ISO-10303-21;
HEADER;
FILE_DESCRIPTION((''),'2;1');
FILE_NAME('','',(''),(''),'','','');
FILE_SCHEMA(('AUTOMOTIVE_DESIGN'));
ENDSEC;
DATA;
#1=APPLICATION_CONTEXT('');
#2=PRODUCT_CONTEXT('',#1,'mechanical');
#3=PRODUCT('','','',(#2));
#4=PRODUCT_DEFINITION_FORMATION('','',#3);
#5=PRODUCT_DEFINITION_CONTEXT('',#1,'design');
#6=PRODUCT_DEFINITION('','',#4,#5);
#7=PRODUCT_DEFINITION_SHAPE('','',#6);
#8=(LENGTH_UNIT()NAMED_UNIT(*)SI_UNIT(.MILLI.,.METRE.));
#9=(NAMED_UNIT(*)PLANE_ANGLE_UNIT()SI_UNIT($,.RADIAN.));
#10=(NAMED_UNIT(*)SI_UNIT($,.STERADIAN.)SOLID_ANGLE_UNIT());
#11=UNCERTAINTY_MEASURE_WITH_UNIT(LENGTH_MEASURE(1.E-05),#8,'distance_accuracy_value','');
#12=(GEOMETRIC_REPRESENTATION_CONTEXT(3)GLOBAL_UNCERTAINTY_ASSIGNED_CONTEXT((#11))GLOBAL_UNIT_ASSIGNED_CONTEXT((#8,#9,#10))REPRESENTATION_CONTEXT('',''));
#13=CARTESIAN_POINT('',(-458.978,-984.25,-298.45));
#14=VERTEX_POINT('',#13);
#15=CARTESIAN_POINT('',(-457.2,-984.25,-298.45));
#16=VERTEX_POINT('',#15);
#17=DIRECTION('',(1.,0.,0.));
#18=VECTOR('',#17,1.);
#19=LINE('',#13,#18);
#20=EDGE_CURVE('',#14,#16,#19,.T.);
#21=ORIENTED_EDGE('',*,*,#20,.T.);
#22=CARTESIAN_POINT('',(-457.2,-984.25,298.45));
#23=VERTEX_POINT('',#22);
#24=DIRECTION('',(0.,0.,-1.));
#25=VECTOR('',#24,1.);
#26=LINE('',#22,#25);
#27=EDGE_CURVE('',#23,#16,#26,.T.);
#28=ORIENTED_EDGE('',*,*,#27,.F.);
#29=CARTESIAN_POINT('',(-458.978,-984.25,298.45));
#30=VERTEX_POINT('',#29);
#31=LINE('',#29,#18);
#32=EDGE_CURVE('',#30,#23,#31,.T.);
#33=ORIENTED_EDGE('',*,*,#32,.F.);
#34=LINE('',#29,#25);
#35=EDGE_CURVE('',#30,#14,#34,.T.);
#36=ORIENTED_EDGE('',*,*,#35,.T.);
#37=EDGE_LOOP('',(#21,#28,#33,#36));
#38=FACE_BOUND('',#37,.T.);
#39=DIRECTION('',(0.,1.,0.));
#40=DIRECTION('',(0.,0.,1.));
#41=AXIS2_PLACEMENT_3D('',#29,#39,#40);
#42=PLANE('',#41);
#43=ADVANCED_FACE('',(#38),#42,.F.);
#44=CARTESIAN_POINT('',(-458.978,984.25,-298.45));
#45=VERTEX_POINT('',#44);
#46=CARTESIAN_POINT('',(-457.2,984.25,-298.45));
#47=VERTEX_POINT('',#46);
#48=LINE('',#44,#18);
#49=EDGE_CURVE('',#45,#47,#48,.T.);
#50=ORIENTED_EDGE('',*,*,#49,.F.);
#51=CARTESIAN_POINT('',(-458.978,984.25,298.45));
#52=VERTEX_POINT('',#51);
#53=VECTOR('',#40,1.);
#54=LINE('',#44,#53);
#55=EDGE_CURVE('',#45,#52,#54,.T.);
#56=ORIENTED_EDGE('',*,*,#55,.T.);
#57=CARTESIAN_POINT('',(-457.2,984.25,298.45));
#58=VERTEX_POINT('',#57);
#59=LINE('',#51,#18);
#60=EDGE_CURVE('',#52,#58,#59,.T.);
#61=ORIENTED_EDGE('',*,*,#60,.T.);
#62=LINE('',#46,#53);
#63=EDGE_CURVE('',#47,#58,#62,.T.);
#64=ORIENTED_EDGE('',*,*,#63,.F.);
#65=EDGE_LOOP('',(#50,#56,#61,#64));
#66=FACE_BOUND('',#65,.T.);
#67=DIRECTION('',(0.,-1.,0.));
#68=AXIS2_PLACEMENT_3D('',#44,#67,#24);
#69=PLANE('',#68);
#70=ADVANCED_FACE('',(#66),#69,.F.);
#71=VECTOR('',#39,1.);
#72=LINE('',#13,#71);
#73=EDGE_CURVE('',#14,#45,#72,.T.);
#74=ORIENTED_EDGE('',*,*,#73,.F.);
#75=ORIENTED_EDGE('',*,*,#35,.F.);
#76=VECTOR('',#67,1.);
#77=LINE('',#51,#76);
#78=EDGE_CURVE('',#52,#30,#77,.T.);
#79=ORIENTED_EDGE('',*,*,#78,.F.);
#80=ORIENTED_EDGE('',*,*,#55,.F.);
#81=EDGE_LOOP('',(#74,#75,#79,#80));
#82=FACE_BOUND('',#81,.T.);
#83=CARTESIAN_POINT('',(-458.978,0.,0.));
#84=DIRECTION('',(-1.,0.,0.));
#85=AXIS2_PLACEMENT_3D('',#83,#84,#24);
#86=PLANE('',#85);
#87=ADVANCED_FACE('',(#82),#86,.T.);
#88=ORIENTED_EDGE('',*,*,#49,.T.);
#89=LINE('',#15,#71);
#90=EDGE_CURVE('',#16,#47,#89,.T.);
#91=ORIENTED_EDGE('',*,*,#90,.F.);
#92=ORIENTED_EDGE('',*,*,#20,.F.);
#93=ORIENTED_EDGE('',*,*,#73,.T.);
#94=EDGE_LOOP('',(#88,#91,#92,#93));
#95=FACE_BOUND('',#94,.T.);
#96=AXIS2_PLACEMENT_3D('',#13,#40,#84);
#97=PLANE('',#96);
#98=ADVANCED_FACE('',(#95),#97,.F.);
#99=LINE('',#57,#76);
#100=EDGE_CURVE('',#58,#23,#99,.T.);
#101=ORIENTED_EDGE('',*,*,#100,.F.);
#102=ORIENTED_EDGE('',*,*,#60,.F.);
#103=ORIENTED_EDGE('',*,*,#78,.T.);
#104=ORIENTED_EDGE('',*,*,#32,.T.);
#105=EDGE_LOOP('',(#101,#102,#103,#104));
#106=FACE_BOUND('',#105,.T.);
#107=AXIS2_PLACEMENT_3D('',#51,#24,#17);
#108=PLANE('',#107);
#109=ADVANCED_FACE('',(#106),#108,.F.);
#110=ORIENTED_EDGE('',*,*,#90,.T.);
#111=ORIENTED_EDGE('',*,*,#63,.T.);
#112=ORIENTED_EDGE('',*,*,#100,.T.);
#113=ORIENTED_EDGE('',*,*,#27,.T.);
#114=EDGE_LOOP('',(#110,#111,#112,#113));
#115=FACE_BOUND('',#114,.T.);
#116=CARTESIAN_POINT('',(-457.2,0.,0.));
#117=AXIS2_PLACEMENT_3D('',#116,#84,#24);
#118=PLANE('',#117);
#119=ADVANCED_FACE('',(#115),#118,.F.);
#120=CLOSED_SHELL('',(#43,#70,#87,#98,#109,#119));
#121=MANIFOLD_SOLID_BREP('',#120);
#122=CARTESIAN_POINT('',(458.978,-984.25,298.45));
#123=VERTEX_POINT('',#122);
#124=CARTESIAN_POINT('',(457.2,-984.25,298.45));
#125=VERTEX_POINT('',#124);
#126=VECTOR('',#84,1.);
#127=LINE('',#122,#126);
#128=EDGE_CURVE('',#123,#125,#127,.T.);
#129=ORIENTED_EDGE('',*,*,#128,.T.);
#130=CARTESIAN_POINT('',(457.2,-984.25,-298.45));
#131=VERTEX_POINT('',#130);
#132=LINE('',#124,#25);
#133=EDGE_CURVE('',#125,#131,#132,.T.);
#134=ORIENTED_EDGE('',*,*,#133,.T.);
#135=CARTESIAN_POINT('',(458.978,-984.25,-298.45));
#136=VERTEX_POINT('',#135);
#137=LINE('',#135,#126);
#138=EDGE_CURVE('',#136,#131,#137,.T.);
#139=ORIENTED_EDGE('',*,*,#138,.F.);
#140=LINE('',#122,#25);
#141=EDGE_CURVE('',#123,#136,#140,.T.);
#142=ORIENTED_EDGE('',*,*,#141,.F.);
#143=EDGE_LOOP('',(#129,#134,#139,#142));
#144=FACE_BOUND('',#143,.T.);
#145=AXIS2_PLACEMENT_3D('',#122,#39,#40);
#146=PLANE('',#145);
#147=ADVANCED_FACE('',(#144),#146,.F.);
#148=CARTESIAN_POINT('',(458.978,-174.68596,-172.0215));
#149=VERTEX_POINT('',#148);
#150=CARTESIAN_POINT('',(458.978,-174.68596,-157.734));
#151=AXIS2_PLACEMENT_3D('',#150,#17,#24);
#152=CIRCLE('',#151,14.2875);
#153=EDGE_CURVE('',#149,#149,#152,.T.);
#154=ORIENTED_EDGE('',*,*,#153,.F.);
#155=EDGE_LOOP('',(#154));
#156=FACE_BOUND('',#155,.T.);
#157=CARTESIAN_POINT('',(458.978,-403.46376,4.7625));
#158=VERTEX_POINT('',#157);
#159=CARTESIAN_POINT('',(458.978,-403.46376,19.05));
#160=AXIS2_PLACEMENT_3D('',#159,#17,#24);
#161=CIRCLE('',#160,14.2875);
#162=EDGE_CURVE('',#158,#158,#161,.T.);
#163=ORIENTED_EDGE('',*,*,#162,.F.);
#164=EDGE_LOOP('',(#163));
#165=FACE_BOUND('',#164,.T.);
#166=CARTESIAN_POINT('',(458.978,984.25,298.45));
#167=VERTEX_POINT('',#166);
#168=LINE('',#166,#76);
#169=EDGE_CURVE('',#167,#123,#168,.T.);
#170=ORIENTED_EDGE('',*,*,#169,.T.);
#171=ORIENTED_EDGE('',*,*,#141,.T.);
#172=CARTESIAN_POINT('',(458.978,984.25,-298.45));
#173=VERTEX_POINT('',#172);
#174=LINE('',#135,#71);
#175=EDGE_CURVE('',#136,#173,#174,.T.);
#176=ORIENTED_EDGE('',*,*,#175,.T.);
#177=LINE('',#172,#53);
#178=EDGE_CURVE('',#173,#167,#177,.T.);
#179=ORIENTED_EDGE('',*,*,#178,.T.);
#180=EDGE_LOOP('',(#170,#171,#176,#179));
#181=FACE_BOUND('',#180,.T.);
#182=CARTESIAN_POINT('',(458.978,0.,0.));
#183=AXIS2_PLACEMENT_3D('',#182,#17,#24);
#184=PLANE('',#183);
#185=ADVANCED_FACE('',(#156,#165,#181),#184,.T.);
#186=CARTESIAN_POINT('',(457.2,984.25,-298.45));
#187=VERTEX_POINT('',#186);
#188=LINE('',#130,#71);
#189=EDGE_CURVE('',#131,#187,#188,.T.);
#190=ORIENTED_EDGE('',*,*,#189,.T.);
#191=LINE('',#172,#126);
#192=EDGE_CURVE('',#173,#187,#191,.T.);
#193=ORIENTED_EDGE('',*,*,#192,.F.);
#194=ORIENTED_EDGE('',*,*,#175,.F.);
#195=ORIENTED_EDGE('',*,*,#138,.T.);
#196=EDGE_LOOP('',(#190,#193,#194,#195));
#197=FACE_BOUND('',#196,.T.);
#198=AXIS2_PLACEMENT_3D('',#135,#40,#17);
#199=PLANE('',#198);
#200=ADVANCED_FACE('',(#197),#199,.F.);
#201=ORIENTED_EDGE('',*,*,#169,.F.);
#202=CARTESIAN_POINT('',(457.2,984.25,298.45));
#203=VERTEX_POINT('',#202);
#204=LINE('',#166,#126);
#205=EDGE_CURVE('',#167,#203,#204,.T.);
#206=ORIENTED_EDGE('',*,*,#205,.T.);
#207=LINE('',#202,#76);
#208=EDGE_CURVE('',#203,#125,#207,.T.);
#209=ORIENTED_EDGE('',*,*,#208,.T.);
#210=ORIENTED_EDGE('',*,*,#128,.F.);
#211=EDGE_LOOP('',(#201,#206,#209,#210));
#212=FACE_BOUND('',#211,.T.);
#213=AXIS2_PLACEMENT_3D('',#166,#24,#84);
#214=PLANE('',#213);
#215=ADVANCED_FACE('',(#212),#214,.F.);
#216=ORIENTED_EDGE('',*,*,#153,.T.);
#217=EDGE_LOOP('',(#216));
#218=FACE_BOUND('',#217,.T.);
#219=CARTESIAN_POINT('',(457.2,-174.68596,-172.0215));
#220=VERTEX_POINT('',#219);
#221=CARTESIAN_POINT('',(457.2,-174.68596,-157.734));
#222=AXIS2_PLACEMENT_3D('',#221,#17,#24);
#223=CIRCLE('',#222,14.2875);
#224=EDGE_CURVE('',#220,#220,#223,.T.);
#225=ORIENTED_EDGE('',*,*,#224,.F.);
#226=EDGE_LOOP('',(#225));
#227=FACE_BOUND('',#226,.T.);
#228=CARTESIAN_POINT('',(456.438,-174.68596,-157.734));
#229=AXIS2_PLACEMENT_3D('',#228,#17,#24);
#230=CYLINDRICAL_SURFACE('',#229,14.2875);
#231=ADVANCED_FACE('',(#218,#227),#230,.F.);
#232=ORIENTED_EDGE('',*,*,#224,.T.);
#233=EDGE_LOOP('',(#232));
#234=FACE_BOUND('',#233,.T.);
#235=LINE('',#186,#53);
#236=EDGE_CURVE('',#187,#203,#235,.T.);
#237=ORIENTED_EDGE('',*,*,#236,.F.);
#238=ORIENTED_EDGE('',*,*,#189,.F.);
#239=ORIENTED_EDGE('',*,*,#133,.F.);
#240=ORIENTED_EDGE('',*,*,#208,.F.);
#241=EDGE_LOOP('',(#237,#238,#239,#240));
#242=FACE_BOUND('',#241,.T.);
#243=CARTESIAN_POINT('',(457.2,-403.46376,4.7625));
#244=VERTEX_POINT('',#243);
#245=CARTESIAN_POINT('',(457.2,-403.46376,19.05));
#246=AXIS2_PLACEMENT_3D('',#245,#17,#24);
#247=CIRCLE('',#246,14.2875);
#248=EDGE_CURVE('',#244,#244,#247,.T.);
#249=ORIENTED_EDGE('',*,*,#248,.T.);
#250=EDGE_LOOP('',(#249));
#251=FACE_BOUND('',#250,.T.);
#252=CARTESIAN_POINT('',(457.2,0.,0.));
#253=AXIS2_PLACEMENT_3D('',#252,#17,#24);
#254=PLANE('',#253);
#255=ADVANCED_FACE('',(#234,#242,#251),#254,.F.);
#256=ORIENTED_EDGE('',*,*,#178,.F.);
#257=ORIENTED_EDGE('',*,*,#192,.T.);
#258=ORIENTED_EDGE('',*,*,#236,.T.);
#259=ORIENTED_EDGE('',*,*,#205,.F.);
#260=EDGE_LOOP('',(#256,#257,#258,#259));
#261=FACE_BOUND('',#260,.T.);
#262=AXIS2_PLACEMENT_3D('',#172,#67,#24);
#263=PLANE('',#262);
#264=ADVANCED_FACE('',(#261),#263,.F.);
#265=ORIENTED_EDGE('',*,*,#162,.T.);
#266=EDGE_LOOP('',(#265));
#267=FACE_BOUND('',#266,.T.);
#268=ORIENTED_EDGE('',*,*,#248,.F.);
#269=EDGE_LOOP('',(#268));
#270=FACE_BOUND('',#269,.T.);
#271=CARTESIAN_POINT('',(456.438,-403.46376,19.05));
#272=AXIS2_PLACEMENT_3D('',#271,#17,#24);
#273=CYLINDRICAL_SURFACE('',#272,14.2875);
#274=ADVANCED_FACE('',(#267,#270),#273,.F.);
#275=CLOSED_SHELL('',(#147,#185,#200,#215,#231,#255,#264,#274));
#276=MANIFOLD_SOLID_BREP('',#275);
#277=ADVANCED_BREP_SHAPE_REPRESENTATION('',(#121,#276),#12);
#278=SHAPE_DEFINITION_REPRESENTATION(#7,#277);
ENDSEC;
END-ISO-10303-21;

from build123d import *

# Parameters (mm, degrees)
BOSS_EXTRUDE1_OUTLINE_W = 596.9
BOSS_EXTRUDE1_OUTLINE_H = 1968.5
BOSS_EXTRUDE1_DEPTH     = 1.778
SKETCH3_R               = 14.2875
CUT_EXTRUDE1_DEPTH      = 2.54


# Read off the part's stored shape, not the designer's step: Boss-Extrude1
with BuildPart() as part:
    # Boss-Extrude1 outline → Boss-Extrude1 (new body)
    with BuildSketch(Plane(origin=(457.2, 0, 0), x_dir=(0, 0, -1), z_dir=(1, 0, 0))):
        Rectangle(BOSS_EXTRUDE1_OUTLINE_W, BOSS_EXTRUDE1_OUTLINE_H)
    extrude(amount=BOSS_EXTRUDE1_DEPTH)


with BuildPart() as body_2:
    # Mirror7: mirrored copy
    add(part.part.mirror(Plane(origin=(0, 0, 0), x_dir=(0, 0, 1), z_dir=(1, 0, 0))))


with BuildPart() as part_1:
    add(part.part)

    # Sketch3 → Cut-Extrude1 (cut)
    with BuildSketch(Plane(origin=(458.978, 0, 0), x_dir=(0, 0, -1), z_dir=(1, 0, 0))):
        with Locations((157.734, -174.68596)):
            Circle(SKETCH3_R)
        with Locations((-19.05, -403.46376)):
            Circle(SKETCH3_R)
    extrude(amount=-CUT_EXTRUDE1_DEPTH, mode=Mode.SUBTRACT)


solid = Compound([body_2.part, part_1.part])
